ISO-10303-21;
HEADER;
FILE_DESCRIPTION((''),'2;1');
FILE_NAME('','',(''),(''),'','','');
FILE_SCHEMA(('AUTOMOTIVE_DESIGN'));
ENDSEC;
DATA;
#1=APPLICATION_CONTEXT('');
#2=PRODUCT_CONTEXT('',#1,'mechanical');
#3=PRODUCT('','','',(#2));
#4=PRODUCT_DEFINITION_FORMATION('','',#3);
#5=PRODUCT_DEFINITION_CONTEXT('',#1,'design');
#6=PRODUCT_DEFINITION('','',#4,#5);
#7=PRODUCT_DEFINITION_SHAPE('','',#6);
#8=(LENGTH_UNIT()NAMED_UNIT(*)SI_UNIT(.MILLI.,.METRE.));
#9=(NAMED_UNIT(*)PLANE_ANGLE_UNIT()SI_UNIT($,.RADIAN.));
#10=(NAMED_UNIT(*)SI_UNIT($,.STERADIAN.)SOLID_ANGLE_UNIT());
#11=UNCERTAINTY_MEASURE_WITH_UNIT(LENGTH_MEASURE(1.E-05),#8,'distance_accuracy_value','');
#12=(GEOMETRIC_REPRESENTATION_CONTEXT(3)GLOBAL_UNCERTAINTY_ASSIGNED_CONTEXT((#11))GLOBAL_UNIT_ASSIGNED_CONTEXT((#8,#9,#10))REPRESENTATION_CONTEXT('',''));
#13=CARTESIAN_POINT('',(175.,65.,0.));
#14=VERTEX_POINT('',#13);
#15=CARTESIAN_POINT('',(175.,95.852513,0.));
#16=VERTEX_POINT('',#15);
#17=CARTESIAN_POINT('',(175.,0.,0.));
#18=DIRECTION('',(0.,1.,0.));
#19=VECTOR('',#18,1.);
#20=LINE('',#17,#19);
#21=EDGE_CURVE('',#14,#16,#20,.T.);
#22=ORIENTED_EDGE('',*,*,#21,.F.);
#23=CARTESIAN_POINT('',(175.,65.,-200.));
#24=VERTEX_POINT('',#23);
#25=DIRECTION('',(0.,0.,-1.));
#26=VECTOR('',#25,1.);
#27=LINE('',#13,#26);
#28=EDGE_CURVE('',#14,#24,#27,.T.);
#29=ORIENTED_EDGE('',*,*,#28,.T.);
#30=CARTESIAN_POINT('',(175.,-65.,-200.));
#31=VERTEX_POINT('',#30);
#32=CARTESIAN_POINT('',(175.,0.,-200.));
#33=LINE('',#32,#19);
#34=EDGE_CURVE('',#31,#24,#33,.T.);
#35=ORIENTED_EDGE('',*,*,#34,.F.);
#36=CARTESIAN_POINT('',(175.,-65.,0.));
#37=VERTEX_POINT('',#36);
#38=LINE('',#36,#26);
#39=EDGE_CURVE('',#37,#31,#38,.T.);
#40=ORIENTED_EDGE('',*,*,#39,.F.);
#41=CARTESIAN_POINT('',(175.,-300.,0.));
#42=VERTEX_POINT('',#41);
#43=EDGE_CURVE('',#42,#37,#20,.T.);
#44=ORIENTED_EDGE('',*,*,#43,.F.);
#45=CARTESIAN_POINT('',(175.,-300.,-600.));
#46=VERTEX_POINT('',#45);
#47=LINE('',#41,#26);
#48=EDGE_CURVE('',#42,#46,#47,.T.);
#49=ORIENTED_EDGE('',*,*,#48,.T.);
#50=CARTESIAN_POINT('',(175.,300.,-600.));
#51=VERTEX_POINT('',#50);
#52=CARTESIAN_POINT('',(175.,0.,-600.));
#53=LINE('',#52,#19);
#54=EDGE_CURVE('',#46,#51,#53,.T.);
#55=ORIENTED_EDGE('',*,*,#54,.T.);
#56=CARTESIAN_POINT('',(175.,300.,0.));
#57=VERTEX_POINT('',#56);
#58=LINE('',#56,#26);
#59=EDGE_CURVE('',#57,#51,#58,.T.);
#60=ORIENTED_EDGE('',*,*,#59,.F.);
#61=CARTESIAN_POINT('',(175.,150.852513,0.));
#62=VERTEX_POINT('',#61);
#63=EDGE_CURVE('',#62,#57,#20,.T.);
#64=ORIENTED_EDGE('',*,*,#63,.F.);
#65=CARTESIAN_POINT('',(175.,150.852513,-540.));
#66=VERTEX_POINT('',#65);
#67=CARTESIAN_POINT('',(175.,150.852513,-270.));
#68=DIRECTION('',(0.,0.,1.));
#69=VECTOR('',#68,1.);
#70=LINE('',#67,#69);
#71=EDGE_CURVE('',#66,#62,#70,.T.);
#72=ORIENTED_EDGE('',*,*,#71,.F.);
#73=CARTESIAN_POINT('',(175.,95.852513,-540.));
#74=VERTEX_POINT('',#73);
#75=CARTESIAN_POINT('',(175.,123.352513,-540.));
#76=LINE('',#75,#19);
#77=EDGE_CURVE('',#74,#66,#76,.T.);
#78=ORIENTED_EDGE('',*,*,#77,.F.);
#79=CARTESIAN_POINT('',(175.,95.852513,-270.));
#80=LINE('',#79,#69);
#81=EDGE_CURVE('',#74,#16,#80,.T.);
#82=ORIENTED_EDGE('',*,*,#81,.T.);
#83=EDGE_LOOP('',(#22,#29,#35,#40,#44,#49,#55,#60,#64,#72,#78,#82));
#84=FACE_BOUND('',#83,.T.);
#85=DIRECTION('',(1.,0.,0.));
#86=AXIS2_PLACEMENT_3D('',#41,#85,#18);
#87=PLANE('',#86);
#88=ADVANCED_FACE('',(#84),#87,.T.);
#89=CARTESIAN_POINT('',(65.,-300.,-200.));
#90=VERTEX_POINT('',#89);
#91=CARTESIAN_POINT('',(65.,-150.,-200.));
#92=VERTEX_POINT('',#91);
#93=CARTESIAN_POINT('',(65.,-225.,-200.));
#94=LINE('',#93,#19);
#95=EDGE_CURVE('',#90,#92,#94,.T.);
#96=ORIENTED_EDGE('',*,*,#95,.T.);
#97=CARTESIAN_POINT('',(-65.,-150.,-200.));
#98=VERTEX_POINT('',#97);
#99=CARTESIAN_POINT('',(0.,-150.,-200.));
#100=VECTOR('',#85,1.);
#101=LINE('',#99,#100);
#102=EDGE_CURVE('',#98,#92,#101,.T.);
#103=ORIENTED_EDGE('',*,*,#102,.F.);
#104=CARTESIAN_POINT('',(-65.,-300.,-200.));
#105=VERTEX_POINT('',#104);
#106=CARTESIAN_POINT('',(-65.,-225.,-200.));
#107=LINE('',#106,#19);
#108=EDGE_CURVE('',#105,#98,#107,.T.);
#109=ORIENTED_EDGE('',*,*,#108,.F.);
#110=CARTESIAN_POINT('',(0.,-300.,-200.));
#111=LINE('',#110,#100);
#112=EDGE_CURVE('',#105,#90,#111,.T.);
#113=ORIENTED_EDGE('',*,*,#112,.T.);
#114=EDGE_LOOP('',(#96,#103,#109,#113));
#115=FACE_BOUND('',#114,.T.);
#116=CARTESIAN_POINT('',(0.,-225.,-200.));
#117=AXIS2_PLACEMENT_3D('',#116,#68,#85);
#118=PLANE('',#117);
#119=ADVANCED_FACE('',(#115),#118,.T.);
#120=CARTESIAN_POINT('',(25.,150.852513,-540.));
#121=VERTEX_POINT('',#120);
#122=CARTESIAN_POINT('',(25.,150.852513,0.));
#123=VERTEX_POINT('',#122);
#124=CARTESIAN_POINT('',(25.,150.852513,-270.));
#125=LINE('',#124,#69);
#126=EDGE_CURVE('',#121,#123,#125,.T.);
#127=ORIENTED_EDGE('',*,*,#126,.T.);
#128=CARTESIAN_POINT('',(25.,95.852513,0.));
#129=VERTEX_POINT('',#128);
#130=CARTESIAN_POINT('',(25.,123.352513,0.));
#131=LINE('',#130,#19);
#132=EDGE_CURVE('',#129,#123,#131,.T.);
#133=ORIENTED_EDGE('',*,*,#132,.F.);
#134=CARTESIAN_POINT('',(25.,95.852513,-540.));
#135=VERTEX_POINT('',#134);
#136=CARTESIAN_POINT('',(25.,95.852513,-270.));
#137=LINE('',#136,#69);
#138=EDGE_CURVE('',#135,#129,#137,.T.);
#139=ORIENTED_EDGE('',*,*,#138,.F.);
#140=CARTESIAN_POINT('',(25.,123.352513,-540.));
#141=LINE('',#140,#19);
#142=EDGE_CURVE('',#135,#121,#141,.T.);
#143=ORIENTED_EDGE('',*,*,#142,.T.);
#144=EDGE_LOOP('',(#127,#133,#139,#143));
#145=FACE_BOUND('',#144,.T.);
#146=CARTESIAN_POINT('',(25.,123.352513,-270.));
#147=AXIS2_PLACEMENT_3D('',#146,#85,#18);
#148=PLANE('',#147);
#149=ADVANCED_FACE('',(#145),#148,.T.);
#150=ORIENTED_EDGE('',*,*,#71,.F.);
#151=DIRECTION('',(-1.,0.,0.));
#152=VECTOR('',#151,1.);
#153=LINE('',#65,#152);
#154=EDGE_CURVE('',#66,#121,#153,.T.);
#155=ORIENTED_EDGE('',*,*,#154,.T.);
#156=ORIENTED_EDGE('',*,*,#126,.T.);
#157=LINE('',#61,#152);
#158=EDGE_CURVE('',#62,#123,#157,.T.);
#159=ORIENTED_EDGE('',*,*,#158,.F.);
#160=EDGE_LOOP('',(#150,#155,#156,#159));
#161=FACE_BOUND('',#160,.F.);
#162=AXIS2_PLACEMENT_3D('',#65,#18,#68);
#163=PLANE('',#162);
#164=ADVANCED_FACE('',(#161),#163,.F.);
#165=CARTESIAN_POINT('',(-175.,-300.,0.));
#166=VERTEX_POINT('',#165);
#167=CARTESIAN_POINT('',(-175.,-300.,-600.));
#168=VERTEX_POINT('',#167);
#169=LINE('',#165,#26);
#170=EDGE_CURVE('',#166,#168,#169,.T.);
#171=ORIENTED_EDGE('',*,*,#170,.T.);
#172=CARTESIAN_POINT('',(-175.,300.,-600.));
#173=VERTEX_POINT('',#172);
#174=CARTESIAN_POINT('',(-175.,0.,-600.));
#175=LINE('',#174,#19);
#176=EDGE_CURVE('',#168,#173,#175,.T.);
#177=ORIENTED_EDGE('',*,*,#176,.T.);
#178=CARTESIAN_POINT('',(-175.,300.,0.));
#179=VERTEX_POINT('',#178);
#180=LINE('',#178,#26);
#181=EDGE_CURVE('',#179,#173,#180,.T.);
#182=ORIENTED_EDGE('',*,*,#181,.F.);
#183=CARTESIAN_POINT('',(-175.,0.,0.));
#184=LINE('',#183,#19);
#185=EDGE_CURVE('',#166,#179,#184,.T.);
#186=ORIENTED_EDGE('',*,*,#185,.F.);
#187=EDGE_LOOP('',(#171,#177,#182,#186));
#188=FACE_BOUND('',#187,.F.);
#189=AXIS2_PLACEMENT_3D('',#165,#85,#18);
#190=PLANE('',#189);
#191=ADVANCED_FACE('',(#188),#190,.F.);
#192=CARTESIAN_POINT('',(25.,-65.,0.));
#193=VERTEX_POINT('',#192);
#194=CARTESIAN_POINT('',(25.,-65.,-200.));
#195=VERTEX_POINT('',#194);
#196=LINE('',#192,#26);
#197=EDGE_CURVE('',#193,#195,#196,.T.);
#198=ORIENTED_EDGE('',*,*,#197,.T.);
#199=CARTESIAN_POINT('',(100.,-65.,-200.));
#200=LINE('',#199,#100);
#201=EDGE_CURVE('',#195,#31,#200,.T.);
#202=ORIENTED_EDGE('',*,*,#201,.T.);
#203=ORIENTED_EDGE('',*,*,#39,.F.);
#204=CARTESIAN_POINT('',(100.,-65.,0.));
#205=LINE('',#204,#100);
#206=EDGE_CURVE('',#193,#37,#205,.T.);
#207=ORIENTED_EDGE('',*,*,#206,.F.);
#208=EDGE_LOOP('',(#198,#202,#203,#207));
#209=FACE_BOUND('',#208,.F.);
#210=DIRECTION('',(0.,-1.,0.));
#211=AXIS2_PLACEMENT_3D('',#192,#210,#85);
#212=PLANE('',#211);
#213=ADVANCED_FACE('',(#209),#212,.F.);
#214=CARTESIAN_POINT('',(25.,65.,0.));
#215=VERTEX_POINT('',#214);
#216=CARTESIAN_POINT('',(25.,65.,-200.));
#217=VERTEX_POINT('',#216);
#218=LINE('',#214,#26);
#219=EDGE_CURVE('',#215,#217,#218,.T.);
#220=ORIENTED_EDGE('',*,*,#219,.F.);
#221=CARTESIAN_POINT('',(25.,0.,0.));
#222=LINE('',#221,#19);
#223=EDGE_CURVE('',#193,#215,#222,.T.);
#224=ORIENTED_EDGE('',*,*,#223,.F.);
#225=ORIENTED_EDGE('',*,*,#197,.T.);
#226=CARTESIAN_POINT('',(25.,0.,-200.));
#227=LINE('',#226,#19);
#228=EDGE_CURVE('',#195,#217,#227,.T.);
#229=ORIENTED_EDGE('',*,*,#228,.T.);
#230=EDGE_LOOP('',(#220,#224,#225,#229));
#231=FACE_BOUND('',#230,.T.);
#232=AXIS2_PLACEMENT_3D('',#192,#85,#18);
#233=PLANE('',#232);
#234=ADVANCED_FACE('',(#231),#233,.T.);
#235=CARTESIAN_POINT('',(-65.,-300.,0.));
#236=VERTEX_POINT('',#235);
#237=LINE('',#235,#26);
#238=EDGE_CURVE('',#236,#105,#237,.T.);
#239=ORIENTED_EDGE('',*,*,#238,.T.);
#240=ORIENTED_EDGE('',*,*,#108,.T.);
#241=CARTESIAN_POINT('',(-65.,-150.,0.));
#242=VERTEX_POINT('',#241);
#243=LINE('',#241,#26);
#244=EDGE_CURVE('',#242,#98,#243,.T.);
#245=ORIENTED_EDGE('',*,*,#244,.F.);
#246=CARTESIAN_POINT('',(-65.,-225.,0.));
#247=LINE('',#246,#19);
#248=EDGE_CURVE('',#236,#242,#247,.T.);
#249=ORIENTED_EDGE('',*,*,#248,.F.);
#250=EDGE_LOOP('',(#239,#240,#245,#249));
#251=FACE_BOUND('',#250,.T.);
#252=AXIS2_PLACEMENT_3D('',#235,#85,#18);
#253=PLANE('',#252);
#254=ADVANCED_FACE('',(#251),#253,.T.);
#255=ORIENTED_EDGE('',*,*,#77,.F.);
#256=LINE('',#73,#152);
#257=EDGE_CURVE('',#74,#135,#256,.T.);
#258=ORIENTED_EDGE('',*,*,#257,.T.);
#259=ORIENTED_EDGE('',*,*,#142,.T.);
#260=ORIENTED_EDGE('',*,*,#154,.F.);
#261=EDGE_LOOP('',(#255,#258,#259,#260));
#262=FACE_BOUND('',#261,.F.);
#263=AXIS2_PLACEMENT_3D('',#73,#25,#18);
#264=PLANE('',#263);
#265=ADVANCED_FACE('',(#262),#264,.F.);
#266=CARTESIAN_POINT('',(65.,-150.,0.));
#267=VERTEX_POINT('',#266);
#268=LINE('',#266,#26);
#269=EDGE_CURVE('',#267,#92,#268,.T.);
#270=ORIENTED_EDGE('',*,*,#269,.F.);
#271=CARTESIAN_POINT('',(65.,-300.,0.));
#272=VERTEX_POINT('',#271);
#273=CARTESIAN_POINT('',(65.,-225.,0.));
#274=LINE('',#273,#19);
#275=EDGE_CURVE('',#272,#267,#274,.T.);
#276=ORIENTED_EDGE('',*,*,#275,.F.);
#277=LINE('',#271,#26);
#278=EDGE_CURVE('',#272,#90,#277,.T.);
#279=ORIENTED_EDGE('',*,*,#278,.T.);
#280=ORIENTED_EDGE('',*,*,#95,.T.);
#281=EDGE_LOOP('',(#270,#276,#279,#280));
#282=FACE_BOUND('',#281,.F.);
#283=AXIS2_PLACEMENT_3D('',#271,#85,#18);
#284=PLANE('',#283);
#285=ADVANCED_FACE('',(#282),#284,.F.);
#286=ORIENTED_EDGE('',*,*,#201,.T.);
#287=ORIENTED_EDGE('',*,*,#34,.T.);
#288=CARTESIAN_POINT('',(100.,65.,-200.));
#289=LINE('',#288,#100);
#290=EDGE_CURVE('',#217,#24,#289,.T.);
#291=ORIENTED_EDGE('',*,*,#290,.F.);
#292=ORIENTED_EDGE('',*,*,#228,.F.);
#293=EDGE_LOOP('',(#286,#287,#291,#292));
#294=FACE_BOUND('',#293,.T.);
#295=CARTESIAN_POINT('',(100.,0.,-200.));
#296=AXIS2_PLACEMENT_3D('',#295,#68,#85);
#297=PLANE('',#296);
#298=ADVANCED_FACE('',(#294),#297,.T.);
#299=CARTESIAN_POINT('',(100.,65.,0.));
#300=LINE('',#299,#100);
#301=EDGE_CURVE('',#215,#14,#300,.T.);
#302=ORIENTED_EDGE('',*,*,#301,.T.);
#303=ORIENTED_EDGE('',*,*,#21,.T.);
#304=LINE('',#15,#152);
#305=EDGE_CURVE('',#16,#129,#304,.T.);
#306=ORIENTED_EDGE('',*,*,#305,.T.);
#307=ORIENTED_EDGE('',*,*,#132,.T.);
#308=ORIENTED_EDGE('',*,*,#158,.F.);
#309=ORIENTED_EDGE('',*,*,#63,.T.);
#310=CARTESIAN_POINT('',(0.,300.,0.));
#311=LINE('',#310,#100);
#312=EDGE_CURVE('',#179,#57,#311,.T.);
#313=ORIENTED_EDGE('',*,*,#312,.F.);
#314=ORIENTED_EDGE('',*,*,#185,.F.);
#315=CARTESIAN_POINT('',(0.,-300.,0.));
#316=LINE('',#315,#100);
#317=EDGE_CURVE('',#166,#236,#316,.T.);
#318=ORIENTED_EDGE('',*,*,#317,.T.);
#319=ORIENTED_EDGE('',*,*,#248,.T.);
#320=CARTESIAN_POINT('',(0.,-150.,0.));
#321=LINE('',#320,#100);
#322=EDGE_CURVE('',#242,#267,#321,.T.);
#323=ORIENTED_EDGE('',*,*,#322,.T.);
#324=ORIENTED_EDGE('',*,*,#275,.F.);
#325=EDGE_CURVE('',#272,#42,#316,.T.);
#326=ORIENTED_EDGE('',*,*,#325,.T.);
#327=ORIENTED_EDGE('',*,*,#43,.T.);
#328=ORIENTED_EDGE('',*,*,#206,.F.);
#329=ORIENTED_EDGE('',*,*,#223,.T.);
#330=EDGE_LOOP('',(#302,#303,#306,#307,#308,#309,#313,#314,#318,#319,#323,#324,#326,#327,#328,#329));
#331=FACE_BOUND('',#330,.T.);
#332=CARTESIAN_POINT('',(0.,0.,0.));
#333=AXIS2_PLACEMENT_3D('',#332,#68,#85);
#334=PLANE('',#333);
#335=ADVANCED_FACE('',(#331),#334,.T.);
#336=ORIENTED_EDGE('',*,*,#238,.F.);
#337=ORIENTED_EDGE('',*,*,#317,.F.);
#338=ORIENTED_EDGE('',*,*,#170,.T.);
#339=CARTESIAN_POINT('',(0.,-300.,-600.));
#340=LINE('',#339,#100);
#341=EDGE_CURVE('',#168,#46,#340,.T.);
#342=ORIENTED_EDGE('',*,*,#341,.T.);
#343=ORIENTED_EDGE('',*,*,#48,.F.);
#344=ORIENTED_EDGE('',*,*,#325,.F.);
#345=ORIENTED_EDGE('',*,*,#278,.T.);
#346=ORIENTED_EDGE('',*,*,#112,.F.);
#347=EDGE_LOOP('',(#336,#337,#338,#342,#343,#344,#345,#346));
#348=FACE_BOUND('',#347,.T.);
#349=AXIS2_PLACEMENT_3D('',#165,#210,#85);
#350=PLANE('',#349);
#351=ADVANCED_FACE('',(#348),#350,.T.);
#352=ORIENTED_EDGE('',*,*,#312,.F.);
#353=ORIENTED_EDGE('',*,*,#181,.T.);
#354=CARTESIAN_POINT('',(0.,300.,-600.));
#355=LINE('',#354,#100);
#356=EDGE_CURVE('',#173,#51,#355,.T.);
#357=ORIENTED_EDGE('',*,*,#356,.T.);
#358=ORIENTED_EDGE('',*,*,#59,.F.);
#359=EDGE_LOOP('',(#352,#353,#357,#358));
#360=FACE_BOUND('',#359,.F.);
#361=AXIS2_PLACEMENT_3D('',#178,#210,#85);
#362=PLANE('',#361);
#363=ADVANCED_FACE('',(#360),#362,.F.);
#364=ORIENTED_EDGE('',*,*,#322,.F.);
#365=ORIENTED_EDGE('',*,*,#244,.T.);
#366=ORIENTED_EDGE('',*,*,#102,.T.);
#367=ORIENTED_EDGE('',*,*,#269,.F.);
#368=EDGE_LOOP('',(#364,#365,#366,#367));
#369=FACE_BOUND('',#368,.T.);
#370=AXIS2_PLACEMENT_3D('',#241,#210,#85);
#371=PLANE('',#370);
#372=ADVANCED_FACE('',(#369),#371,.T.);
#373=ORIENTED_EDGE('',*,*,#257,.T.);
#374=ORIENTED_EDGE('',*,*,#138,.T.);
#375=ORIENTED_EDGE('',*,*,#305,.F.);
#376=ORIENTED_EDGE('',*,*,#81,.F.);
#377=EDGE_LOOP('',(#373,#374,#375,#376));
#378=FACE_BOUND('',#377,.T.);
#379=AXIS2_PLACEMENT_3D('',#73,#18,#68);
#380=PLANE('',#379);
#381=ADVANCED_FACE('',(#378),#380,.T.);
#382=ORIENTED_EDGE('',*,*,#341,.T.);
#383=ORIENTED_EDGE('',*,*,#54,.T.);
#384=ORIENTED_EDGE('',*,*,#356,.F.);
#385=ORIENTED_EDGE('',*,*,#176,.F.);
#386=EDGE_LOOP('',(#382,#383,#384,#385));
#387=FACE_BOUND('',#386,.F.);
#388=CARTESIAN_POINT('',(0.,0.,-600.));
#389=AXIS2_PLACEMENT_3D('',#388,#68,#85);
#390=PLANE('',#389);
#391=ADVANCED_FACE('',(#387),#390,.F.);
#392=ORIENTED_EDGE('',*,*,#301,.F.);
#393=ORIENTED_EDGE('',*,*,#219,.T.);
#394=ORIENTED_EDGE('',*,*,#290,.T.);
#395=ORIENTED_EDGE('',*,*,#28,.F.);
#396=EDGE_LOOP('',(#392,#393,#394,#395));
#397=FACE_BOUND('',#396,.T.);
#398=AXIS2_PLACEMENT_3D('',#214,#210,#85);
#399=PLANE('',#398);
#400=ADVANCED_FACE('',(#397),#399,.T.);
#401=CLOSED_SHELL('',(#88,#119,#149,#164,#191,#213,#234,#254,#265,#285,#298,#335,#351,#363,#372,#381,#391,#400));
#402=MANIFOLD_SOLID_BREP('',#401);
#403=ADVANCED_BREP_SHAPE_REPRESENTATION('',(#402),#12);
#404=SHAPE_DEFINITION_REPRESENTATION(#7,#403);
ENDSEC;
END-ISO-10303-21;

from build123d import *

# Parameters (mm, degrees)
F4_W      = 350
F4_H      = 600
F5_DEPTH  = 600
F6_W      = 130
F6_H      = 150
F6_W_2    = 150
F6_H_2    = 130
F7_DEPTH  = 200
F8_W      = 55
F8_H      = 540
F10_DEPTH = 150


# Not quite as in the source:
# - a feature names something its author has since deleted; it is built from what else it names


with BuildPart() as f5:
    # F4 (on Top) → F5 (new body)
    with BuildSketch(Plane.XY):
        Rectangle(F4_W, F4_H)
    extrude(amount=-F5_DEPTH)

    # F6 (on face) → F7 (cut)
    with BuildSketch(Plane.XY):
        with Locations((0, -225)):
            Rectangle(F6_W, F6_H)
        with Locations((100, 0)):
            Rectangle(F6_W_2, F6_H_2)
    extrude(amount=-F7_DEPTH, mode=Mode.SUBTRACT)

    # F8 (on face) → F10 (cut)
    with BuildSketch(Plane.YZ.offset(175)):
        with Locations((123.3525127172, -270)):
            Rectangle(F8_W, F8_H)
    extrude(amount=-F10_DEPTH, mode=Mode.SUBTRACT)


solid = f5.part
